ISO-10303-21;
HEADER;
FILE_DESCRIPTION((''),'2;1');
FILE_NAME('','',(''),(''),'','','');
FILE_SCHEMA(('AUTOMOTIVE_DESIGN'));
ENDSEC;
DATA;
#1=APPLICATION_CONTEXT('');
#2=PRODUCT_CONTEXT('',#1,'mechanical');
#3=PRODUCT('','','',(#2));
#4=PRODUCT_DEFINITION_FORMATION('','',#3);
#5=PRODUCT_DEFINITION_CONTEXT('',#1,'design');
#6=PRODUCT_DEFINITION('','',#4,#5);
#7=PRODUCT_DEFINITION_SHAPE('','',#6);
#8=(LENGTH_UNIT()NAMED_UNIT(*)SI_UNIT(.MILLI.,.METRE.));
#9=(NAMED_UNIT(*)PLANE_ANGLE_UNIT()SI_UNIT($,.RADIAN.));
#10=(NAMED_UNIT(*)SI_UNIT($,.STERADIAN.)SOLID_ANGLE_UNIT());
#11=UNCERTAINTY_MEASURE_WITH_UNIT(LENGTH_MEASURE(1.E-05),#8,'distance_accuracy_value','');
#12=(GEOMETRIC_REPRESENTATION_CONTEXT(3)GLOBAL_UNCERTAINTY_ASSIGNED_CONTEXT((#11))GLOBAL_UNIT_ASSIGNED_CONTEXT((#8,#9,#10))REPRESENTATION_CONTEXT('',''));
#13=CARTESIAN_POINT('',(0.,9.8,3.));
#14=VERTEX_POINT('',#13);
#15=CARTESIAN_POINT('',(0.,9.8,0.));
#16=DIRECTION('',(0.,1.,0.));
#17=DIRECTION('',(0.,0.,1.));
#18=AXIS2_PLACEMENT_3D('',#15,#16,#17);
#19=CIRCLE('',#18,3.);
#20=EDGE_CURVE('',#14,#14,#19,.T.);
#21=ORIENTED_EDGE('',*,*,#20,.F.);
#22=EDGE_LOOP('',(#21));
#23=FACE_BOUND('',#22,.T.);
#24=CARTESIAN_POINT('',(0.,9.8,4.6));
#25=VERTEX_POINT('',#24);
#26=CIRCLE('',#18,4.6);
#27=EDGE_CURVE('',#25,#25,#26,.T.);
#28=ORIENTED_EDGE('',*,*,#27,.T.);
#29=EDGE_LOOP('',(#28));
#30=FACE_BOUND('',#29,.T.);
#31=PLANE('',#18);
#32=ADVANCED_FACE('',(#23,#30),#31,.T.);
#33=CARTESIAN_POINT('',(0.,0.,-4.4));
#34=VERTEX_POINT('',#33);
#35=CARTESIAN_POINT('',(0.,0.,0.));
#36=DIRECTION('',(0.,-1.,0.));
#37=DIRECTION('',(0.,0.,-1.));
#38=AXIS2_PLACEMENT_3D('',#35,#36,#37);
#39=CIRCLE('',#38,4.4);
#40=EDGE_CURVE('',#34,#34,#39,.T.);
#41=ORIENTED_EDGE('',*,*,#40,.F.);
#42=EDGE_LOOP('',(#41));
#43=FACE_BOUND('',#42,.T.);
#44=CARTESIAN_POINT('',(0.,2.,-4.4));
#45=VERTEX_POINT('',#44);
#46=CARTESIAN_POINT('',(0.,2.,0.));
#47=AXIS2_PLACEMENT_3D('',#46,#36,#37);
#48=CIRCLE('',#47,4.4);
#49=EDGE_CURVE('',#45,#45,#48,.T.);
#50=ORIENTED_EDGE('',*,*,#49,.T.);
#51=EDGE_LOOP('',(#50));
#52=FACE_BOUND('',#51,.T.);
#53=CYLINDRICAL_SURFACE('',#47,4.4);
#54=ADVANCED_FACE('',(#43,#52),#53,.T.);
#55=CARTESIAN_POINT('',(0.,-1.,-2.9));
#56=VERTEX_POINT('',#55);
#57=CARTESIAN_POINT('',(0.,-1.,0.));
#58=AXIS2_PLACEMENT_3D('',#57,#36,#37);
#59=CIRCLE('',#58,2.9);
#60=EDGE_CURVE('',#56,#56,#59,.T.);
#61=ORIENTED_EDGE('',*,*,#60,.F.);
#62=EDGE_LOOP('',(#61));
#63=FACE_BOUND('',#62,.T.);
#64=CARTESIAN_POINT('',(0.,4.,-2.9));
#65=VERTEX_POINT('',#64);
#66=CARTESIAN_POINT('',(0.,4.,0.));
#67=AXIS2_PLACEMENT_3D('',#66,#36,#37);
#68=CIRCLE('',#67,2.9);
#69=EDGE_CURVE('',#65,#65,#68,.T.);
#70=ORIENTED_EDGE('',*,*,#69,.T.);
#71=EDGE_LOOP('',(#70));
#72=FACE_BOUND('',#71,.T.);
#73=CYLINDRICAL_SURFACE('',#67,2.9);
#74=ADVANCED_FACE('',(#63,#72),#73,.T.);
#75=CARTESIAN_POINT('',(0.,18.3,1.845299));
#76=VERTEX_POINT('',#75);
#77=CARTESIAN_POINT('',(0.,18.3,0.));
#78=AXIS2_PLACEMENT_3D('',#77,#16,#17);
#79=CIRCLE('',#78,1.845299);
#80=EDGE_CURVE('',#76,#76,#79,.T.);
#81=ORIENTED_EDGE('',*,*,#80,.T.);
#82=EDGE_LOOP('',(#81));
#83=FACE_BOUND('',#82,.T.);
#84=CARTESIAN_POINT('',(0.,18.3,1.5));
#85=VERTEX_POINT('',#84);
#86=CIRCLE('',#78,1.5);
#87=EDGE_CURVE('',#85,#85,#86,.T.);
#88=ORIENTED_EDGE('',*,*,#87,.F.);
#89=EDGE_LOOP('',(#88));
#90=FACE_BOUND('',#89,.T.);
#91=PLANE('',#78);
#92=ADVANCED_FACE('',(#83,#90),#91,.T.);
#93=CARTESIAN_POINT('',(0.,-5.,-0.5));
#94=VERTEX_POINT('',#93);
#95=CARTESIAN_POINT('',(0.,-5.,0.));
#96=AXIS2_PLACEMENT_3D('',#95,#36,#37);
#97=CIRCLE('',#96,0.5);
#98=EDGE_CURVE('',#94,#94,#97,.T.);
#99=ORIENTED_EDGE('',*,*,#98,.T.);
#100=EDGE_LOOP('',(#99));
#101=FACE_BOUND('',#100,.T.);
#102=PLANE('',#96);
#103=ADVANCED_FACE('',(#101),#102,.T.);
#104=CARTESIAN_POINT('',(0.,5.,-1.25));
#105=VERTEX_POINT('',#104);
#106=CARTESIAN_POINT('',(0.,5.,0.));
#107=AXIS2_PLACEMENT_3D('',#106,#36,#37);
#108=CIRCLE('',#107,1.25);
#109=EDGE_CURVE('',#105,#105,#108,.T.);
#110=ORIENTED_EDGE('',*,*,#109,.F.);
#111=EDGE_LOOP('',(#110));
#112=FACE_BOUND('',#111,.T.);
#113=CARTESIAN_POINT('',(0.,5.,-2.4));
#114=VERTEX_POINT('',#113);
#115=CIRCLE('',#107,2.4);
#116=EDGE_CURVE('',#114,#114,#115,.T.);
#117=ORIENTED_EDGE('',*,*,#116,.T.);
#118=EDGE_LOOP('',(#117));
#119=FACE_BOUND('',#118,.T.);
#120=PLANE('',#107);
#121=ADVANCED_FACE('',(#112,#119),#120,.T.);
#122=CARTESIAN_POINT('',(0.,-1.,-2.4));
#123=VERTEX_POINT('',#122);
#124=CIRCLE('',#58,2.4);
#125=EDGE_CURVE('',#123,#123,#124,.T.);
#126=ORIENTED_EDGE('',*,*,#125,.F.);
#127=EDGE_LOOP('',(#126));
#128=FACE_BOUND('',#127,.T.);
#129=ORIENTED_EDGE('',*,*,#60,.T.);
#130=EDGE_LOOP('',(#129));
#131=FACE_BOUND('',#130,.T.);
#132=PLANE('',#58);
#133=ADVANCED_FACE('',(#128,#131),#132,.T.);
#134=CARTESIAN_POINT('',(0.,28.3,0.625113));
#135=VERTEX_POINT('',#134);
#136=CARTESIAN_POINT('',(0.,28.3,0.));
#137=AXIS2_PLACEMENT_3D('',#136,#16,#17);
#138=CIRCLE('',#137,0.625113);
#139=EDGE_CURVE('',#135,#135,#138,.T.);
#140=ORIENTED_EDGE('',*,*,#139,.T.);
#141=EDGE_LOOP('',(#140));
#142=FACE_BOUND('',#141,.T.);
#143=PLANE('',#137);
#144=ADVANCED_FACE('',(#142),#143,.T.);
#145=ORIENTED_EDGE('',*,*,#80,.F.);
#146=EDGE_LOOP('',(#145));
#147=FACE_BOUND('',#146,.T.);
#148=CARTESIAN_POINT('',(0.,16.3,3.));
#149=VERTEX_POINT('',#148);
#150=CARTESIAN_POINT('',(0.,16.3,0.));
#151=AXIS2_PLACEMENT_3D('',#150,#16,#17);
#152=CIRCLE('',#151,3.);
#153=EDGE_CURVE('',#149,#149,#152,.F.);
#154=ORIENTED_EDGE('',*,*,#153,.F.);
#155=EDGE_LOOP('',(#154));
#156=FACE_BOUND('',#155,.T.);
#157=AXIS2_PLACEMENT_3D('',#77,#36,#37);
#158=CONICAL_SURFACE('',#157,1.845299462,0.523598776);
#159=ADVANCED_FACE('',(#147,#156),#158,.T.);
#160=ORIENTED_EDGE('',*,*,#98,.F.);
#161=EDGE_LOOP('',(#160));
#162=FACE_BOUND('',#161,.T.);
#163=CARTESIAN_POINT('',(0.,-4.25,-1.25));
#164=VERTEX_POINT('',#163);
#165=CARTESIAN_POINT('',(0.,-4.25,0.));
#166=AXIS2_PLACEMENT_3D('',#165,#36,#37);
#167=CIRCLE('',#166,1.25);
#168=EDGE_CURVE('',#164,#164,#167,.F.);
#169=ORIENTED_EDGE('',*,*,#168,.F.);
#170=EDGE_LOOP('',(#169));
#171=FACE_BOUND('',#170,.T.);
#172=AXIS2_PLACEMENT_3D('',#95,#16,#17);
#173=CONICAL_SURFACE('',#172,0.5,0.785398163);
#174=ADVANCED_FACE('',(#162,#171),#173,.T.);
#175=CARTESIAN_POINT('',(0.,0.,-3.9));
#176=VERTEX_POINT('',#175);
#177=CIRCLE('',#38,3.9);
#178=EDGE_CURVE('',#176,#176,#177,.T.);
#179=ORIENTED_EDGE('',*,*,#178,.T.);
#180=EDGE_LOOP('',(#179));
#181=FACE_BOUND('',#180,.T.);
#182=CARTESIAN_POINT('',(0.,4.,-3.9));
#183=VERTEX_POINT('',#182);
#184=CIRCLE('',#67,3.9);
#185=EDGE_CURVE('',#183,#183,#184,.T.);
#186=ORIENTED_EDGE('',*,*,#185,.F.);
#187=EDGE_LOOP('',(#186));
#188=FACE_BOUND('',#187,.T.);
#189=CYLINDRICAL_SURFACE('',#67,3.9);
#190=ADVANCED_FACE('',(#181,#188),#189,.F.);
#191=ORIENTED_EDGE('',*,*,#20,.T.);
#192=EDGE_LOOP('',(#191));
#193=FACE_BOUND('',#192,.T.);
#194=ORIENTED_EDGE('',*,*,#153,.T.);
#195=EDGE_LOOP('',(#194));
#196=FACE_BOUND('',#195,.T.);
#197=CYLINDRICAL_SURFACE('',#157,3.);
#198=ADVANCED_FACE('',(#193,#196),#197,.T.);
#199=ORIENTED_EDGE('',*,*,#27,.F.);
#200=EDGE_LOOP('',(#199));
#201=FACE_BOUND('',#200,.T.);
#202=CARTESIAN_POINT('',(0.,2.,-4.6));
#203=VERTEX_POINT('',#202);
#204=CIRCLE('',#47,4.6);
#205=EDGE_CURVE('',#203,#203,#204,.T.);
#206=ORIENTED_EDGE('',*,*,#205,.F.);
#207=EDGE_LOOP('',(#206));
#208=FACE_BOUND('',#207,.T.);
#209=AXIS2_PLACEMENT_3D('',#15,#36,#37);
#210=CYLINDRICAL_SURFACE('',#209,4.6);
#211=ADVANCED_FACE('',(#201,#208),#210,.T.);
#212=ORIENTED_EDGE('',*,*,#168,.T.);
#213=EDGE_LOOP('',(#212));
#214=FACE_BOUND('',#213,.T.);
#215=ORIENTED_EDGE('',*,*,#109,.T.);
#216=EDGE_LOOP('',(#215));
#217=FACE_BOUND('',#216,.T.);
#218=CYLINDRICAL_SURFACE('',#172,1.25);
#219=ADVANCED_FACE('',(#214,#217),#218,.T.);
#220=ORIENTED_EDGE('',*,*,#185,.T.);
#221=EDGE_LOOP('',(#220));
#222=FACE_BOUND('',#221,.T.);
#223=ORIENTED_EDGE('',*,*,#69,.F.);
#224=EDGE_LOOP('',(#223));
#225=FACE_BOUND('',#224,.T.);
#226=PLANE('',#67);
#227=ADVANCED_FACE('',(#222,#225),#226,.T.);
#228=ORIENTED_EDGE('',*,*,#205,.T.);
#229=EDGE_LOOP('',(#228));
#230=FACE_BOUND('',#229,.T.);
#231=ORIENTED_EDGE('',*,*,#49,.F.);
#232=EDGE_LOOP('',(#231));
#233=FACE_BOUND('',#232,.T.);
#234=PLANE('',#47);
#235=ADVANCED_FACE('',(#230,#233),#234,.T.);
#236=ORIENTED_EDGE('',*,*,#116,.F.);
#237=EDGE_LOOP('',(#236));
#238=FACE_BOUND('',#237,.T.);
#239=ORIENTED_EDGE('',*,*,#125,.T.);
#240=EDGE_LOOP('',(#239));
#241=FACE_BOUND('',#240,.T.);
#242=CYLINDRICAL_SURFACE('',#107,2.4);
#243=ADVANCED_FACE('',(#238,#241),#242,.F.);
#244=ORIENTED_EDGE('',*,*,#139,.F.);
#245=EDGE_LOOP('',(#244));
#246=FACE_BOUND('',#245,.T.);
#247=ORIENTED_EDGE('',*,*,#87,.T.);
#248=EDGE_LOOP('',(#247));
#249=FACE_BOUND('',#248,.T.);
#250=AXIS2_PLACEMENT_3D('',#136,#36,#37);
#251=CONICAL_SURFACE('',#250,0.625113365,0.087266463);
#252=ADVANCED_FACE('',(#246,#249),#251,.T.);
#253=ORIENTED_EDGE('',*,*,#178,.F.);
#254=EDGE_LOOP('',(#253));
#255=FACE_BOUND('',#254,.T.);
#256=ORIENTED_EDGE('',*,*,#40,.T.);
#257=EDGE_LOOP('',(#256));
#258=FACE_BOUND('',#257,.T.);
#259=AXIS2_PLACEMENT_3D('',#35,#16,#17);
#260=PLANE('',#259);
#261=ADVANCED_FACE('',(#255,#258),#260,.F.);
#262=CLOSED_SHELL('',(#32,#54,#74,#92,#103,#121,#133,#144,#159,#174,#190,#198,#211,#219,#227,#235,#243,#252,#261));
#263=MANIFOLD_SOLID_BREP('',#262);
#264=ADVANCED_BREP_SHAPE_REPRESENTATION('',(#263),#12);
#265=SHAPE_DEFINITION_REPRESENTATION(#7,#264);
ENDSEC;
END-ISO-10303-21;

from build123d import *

# Parameters (mm, degrees)
SKETCH_1_R          = 4.6
EXTRUDE_1_DEPTH     = 9.8
SKETCH_2_R          = 4.6
SKETCH_2_R_2        = 4.4
CUT_EXTRUDE_1_DEPTH = 2
SKETCH_3_R          = 3.9
SKETCH_3_R_2        = 2.9
CUT_EXTRUDE_2_DEPTH = 4
SKETCH_4_R          = 2.4
CUT_EXTRUDE_3_DEPTH = 5
SKETCH_5_R          = 1.25
EXTRUDE_4_DEPTH     = 10
CHAMFER_1_SIZE      = 0.75
EXTRUDE_START       = 1
SKETCH_6_R          = 2.9
SKETCH_6_R_2        = 2.4
EXTRUDE_5_DEPTH     = 1
SKETCH_7_R          = 3
EXTRUDE_6_DEPTH     = 8.5
CHAMFER_2_SIZE      = 2
CHAMFER_2_SIZE2     = 1.154700538
SKETCH_8_R          = 1.5
EXTRUDE_7_DEPTH     = 10
CHAMFER_3_SIZE      = 10
CHAMFER_3_SIZE_2    = 0.874886635


with BuildPart() as part:
    # 草图1 → 拉伸1 (new body)
    with BuildSketch(Plane(origin=(0, 0, 0), x_dir=(1, 0, 0), z_dir=(0, 1, 0))):
        with Locations(Location((0, 0, 0), (0, 0, 270))):
            Circle(SKETCH_1_R)
    extrude(amount=EXTRUDE_1_DEPTH)

    # 草图2 → 切除-拉伸1 (cut)
    with BuildSketch(Plane.XZ):
        with Locations(Location((0, 0, 0), (0, 0, 270))):
            Circle(SKETCH_2_R)
        with Locations(Location((0, 0, 0), (0, 0, 270))):
            Circle(SKETCH_2_R_2, mode=Mode.SUBTRACT)
    extrude(amount=-CUT_EXTRUDE_1_DEPTH, mode=Mode.SUBTRACT)

    # 草图3 → 切除-拉伸2 (cut)
    with BuildSketch(Plane.XZ):
        with Locations(Location((0, 0, 0), (0, 0, 270))):
            Circle(SKETCH_3_R)
        with Locations(Location((0, 0, 0), (0, 0, 270))):
            Circle(SKETCH_3_R_2, mode=Mode.SUBTRACT)
    extrude(amount=-CUT_EXTRUDE_2_DEPTH, mode=Mode.SUBTRACT)

    # 草图4 → 切除-拉伸3 (cut)
    with BuildSketch(Plane.XZ):
        with Locations(Location((0, 0, 0), (0, 0, 270))):
            Circle(SKETCH_4_R)
    extrude(amount=-CUT_EXTRUDE_3_DEPTH, mode=Mode.SUBTRACT)

    # 草图5 → 拉伸4 (add)
    with BuildSketch(Plane.XZ.offset(-5)):
        with Locations(Location((0, 0, 0), (0, 0, 270))):
            Circle(SKETCH_5_R)
    extrude(amount=EXTRUDE_4_DEPTH)

    # 倒角1
    chamfer_1_edges = [part.edges().sort_by_distance(p)[0] for p in [
        (0, -5, 1.25),
    ]]
    chamfer(chamfer_1_edges, length=CHAMFER_1_SIZE)

    # 草图6 → 拉伸5 (add)
    with BuildSketch(Plane.XZ.offset(EXTRUDE_START)):
        with Locations(Location((0, 0, 0), (0, 0, 270))):
            Circle(SKETCH_6_R)
        with Locations(Location((0, 0, 0), (0, 0, 270))):
            Circle(SKETCH_6_R_2, mode=Mode.SUBTRACT)
    extrude(amount=-EXTRUDE_5_DEPTH)

    # 草图7 → 拉伸6 (add)
    with BuildSketch(Plane(origin=(0, 9.8, 0), x_dir=(-1, 0, 0), z_dir=(0, 1, 0))):
        with Locations(Location((0, 0, 0), (0, 0, 90))):
            Circle(SKETCH_7_R)
    extrude(amount=EXTRUDE_6_DEPTH)

    # 倒角2
    chamfer_2_edges = [part.edges().sort_by_distance(p)[0] for p in [
        (0, 18.3, -3),
    ]]
    chamfer_2_side = [part.faces().sort_by_distance(p)[0] for p in [
        (0, 14.05, -3),
    ]]
    chamfer(chamfer_2_edges, length=CHAMFER_2_SIZE, length2=CHAMFER_2_SIZE2, reference=chamfer_2_side[0])

    # 草图8 → 拉伸7 (add)
    with BuildSketch(Plane(origin=(0, 18.3, 0), x_dir=(-1, 0, 0), z_dir=(0, 1, 0))):
        with Locations(Location((0, 0, 0), (0, 0, 90))):
            Circle(SKETCH_8_R)
    extrude(amount=EXTRUDE_7_DEPTH)

    # 倒角3
    # the kernel refuses this chamfer: 10, 0.874886635 mm, written as the material it takes off along each edge
    with BuildSketch(Plane(origin=(0, 28.3, 0), x_dir=(0, 0, 1), z_dir=(-1, 0, 0))) as chamfer_3_piece_1_section:
        Polygon((1.5, -CHAMFER_3_SIZE), (1.5 - CHAMFER_3_SIZE_2, 0), (1.5, 0), align=None)
    chamfer_3_piece_1 = revolve(axis=Axis((0, 28.3, 0), (0, 1, 0)), mode=Mode.PRIVATE)
    chamfer_3_piece_1 = split(chamfer_3_piece_1, bisect_by=Plane(origin=(0, 18.3, -1.083102127), z_dir=(0, 1, 0)), keep=Keep.TOP, mode=Mode.PRIVATE)
    add(chamfer_3_piece_1, mode=Mode.SUBTRACT)


solid = part.part
